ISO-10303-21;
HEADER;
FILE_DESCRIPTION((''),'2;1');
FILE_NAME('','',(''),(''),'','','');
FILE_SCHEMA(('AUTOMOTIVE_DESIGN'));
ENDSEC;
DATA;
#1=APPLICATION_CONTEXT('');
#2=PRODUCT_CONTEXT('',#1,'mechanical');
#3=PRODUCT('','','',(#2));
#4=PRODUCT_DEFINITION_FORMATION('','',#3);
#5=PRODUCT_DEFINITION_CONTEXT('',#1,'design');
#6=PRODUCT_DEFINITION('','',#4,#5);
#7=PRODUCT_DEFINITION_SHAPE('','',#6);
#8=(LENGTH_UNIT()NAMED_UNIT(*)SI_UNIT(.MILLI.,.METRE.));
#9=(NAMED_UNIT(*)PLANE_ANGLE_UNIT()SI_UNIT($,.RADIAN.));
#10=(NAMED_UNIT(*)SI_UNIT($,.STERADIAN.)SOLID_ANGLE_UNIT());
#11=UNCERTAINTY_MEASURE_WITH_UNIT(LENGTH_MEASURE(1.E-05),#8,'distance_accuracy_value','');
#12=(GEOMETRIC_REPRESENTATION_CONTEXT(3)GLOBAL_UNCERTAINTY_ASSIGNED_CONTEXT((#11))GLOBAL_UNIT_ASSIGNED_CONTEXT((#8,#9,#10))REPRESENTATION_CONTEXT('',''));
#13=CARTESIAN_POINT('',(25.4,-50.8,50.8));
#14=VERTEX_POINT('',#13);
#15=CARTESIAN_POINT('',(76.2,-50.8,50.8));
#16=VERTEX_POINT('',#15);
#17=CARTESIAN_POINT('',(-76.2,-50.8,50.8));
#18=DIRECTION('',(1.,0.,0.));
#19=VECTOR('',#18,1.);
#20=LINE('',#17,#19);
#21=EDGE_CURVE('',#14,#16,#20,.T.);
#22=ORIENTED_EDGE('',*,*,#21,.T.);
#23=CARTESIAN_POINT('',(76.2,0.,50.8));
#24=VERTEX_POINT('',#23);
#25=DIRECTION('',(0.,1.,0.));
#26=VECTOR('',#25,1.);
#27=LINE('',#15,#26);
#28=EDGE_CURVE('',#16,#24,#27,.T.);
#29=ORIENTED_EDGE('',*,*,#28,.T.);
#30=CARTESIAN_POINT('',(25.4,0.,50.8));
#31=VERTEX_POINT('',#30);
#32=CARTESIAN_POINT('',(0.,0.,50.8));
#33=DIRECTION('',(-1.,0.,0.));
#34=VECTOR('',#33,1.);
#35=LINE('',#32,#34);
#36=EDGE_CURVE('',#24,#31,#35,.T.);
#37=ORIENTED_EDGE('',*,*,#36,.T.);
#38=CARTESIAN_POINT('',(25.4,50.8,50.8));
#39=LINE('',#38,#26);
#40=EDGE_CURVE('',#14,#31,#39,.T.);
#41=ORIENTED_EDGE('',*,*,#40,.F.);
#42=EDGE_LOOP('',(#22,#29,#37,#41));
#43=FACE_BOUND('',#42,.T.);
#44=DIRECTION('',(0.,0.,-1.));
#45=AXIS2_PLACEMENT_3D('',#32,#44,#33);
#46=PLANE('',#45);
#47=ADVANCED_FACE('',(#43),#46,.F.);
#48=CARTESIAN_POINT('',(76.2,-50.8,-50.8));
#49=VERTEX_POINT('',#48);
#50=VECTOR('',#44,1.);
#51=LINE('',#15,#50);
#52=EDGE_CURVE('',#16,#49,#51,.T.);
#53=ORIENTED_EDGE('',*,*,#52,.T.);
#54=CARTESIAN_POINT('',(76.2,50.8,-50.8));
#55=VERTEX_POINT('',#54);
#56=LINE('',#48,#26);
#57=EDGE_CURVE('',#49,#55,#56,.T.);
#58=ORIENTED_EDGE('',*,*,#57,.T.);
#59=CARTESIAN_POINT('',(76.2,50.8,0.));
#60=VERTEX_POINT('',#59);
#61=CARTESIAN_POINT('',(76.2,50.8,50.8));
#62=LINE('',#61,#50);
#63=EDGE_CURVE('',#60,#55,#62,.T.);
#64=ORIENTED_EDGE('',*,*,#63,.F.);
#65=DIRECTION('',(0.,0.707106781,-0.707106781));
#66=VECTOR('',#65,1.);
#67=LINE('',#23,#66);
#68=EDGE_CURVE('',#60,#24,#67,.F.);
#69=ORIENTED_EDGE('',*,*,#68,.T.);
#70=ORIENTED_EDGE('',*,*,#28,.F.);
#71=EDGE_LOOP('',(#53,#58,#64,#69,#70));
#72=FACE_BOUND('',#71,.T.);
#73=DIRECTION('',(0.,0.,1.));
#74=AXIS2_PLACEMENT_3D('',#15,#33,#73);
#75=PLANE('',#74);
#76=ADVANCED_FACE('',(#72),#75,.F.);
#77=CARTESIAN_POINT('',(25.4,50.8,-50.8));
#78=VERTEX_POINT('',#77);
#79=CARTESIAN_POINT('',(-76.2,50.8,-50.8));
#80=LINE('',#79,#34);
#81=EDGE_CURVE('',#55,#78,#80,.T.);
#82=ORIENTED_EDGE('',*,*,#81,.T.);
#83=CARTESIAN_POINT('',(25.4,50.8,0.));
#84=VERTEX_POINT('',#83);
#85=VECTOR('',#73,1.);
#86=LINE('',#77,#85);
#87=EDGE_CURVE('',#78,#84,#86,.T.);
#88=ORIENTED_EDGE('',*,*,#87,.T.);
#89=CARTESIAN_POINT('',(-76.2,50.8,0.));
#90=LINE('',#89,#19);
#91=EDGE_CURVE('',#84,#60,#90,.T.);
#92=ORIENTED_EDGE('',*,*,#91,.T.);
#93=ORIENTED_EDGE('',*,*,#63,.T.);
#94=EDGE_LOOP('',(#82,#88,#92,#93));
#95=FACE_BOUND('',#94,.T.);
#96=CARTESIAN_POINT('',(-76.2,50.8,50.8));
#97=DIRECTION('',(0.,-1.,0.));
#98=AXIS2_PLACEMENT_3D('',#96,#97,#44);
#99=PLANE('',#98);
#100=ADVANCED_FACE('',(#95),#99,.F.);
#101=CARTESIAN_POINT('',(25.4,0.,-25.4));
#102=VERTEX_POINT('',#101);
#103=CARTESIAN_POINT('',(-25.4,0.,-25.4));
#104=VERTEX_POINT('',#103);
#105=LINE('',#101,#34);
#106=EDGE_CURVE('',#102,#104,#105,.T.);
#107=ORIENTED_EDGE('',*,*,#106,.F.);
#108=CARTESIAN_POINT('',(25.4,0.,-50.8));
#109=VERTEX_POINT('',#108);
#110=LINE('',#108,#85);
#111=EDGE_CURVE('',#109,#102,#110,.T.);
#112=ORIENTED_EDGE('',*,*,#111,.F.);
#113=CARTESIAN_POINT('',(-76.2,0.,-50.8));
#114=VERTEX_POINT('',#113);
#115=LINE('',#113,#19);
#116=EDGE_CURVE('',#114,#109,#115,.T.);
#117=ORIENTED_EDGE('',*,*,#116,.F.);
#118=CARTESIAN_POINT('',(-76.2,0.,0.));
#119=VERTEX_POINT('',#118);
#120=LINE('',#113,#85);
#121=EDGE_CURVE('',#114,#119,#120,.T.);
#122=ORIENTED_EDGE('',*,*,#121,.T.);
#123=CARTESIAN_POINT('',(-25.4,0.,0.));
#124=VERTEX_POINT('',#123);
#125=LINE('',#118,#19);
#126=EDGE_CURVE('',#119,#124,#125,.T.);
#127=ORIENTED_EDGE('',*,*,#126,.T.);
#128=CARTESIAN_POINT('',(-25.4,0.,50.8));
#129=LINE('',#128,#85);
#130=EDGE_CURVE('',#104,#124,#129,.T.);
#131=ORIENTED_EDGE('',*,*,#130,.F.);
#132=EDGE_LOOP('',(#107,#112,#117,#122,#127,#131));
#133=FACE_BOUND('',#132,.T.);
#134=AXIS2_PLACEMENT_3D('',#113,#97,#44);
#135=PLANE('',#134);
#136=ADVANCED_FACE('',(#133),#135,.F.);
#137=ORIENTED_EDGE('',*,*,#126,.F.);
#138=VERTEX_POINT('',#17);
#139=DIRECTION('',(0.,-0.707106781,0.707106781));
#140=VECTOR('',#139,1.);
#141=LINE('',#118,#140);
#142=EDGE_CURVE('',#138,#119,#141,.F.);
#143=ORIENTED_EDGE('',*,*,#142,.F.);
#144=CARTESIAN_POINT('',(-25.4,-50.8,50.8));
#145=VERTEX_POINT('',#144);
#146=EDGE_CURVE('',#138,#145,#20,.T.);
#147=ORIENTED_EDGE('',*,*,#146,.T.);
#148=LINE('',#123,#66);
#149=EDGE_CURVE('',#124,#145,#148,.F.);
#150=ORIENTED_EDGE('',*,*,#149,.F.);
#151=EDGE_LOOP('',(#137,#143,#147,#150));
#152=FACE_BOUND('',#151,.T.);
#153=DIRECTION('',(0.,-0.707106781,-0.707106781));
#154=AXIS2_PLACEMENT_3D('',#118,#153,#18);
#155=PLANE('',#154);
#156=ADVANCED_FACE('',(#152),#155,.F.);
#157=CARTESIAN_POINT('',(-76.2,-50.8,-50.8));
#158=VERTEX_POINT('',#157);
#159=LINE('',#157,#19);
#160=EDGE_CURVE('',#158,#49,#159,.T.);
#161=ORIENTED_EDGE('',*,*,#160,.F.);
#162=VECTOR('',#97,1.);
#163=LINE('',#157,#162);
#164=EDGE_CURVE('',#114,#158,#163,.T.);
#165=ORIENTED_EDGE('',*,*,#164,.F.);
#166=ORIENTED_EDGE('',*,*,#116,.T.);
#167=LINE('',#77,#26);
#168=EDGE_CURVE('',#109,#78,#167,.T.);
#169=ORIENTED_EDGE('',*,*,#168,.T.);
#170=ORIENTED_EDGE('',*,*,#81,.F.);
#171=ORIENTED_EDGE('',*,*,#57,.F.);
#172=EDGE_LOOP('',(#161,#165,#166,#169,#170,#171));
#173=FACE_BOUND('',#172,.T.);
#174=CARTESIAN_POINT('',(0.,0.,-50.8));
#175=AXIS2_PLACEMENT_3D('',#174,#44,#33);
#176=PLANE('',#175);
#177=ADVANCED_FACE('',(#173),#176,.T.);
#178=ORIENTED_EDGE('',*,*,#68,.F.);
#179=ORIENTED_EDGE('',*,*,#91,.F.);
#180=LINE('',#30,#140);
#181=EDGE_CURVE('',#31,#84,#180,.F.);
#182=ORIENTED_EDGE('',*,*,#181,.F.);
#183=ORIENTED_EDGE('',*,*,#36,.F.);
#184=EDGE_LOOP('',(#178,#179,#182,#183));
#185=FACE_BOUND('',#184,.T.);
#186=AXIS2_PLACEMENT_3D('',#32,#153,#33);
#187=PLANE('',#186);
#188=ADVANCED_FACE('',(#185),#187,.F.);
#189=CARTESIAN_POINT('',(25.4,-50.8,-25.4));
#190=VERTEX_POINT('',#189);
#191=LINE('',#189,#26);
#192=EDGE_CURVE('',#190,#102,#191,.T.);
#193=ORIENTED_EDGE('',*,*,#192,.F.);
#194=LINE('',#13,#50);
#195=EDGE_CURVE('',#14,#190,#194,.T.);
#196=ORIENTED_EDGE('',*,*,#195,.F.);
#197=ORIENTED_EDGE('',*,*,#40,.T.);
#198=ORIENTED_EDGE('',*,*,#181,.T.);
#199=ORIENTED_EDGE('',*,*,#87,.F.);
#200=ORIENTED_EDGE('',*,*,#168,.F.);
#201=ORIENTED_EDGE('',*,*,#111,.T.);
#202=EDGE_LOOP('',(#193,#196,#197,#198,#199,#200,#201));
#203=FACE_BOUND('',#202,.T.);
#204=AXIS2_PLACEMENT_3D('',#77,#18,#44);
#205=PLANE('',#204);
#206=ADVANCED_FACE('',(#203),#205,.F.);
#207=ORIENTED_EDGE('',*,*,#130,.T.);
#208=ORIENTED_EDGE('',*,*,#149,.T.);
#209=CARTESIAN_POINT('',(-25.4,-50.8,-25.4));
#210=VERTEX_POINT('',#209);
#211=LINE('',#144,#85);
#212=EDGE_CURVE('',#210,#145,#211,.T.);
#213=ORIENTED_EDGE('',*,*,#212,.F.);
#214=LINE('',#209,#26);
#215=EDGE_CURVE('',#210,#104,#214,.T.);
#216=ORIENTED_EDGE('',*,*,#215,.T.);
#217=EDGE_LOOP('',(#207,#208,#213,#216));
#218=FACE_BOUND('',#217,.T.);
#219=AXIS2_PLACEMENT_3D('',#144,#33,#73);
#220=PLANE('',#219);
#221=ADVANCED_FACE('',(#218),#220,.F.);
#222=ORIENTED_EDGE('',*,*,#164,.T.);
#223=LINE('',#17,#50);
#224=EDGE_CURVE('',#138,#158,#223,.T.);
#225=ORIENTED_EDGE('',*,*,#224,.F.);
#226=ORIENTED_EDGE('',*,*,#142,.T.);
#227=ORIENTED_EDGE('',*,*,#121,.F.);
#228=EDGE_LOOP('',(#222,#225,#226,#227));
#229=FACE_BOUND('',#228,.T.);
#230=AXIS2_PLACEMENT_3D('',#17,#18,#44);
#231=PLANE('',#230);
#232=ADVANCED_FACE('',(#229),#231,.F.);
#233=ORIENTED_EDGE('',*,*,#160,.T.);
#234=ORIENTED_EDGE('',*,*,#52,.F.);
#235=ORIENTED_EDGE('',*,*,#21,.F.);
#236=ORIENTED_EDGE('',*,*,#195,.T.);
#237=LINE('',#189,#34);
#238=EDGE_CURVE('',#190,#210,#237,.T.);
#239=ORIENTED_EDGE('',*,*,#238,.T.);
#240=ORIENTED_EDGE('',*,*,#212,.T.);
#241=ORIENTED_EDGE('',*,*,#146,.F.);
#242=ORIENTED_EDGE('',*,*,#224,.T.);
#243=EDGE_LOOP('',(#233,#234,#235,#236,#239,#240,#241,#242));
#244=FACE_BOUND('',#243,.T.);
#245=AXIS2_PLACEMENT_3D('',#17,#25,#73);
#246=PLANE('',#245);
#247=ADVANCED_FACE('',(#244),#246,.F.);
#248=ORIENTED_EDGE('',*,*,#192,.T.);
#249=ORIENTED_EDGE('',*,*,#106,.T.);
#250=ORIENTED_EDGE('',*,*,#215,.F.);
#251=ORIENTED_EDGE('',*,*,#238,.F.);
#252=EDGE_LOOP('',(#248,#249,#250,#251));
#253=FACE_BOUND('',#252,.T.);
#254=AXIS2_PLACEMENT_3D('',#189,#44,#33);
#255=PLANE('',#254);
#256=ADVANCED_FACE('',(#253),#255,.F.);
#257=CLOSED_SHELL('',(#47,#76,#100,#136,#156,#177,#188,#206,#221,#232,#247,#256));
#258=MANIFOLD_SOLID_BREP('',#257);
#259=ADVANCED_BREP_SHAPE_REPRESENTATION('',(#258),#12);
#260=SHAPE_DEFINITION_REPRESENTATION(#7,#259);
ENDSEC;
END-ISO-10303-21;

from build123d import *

# Parameters (mm, degrees)
SKETCH2_W           = 152.4
SKETCH2_H           = 101.6
BOSS_EXTRUDE1_DEPTH = 50.8
SKETCH4_W           = 101.6
SKETCH4_H           = 50.8
CUT_EXTRUDE1_DEPTH  = 137.783186101
SKETCH5_W           = 50.8
SKETCH5_H           = 76.2
CUT_EXTRUDE2_DEPTH  = 105.726882891
CHAMFER1_SIZE       = 50.8


with BuildPart() as part:
    # Sketch2 → Boss-Extrude1 (new, symmetric)
    with BuildSketch(Plane.XY):
        Rectangle(SKETCH2_W, SKETCH2_H)
    extrude(amount=BOSS_EXTRUDE1_DEPTH, both=True)

    # Sketch4 → Cut-Extrude1 (cut, through all)
    with BuildSketch(Plane.XY.offset(50.8)):
        with Locations((-25.4, 25.4)):
            Rectangle(SKETCH4_W, SKETCH4_H)
    extrude(amount=-CUT_EXTRUDE1_DEPTH, mode=Mode.SUBTRACT)

    # Sketch5 → Cut-Extrude2 (cut, through all)
    with BuildSketch(Plane(origin=(0, 0, 0), x_dir=(1, 0, 0), z_dir=(0, 1, 0))):
        with Locations((0, -12.7)):
            Rectangle(SKETCH5_W, SKETCH5_H)
    extrude(amount=-CUT_EXTRUDE2_DEPTH, mode=Mode.SUBTRACT)

    # Chamfer1
    chamfer1_edges = [part.edges().sort_by_distance(p)[0] for p in [
        (-50.8, 0, 50.8),
        (50.8, 50.8, 50.8),
    ]]
    chamfer(chamfer1_edges, length=CHAMFER1_SIZE - 0.0001)  # a hair under: the kernel refuses the full size


solid = part.part
